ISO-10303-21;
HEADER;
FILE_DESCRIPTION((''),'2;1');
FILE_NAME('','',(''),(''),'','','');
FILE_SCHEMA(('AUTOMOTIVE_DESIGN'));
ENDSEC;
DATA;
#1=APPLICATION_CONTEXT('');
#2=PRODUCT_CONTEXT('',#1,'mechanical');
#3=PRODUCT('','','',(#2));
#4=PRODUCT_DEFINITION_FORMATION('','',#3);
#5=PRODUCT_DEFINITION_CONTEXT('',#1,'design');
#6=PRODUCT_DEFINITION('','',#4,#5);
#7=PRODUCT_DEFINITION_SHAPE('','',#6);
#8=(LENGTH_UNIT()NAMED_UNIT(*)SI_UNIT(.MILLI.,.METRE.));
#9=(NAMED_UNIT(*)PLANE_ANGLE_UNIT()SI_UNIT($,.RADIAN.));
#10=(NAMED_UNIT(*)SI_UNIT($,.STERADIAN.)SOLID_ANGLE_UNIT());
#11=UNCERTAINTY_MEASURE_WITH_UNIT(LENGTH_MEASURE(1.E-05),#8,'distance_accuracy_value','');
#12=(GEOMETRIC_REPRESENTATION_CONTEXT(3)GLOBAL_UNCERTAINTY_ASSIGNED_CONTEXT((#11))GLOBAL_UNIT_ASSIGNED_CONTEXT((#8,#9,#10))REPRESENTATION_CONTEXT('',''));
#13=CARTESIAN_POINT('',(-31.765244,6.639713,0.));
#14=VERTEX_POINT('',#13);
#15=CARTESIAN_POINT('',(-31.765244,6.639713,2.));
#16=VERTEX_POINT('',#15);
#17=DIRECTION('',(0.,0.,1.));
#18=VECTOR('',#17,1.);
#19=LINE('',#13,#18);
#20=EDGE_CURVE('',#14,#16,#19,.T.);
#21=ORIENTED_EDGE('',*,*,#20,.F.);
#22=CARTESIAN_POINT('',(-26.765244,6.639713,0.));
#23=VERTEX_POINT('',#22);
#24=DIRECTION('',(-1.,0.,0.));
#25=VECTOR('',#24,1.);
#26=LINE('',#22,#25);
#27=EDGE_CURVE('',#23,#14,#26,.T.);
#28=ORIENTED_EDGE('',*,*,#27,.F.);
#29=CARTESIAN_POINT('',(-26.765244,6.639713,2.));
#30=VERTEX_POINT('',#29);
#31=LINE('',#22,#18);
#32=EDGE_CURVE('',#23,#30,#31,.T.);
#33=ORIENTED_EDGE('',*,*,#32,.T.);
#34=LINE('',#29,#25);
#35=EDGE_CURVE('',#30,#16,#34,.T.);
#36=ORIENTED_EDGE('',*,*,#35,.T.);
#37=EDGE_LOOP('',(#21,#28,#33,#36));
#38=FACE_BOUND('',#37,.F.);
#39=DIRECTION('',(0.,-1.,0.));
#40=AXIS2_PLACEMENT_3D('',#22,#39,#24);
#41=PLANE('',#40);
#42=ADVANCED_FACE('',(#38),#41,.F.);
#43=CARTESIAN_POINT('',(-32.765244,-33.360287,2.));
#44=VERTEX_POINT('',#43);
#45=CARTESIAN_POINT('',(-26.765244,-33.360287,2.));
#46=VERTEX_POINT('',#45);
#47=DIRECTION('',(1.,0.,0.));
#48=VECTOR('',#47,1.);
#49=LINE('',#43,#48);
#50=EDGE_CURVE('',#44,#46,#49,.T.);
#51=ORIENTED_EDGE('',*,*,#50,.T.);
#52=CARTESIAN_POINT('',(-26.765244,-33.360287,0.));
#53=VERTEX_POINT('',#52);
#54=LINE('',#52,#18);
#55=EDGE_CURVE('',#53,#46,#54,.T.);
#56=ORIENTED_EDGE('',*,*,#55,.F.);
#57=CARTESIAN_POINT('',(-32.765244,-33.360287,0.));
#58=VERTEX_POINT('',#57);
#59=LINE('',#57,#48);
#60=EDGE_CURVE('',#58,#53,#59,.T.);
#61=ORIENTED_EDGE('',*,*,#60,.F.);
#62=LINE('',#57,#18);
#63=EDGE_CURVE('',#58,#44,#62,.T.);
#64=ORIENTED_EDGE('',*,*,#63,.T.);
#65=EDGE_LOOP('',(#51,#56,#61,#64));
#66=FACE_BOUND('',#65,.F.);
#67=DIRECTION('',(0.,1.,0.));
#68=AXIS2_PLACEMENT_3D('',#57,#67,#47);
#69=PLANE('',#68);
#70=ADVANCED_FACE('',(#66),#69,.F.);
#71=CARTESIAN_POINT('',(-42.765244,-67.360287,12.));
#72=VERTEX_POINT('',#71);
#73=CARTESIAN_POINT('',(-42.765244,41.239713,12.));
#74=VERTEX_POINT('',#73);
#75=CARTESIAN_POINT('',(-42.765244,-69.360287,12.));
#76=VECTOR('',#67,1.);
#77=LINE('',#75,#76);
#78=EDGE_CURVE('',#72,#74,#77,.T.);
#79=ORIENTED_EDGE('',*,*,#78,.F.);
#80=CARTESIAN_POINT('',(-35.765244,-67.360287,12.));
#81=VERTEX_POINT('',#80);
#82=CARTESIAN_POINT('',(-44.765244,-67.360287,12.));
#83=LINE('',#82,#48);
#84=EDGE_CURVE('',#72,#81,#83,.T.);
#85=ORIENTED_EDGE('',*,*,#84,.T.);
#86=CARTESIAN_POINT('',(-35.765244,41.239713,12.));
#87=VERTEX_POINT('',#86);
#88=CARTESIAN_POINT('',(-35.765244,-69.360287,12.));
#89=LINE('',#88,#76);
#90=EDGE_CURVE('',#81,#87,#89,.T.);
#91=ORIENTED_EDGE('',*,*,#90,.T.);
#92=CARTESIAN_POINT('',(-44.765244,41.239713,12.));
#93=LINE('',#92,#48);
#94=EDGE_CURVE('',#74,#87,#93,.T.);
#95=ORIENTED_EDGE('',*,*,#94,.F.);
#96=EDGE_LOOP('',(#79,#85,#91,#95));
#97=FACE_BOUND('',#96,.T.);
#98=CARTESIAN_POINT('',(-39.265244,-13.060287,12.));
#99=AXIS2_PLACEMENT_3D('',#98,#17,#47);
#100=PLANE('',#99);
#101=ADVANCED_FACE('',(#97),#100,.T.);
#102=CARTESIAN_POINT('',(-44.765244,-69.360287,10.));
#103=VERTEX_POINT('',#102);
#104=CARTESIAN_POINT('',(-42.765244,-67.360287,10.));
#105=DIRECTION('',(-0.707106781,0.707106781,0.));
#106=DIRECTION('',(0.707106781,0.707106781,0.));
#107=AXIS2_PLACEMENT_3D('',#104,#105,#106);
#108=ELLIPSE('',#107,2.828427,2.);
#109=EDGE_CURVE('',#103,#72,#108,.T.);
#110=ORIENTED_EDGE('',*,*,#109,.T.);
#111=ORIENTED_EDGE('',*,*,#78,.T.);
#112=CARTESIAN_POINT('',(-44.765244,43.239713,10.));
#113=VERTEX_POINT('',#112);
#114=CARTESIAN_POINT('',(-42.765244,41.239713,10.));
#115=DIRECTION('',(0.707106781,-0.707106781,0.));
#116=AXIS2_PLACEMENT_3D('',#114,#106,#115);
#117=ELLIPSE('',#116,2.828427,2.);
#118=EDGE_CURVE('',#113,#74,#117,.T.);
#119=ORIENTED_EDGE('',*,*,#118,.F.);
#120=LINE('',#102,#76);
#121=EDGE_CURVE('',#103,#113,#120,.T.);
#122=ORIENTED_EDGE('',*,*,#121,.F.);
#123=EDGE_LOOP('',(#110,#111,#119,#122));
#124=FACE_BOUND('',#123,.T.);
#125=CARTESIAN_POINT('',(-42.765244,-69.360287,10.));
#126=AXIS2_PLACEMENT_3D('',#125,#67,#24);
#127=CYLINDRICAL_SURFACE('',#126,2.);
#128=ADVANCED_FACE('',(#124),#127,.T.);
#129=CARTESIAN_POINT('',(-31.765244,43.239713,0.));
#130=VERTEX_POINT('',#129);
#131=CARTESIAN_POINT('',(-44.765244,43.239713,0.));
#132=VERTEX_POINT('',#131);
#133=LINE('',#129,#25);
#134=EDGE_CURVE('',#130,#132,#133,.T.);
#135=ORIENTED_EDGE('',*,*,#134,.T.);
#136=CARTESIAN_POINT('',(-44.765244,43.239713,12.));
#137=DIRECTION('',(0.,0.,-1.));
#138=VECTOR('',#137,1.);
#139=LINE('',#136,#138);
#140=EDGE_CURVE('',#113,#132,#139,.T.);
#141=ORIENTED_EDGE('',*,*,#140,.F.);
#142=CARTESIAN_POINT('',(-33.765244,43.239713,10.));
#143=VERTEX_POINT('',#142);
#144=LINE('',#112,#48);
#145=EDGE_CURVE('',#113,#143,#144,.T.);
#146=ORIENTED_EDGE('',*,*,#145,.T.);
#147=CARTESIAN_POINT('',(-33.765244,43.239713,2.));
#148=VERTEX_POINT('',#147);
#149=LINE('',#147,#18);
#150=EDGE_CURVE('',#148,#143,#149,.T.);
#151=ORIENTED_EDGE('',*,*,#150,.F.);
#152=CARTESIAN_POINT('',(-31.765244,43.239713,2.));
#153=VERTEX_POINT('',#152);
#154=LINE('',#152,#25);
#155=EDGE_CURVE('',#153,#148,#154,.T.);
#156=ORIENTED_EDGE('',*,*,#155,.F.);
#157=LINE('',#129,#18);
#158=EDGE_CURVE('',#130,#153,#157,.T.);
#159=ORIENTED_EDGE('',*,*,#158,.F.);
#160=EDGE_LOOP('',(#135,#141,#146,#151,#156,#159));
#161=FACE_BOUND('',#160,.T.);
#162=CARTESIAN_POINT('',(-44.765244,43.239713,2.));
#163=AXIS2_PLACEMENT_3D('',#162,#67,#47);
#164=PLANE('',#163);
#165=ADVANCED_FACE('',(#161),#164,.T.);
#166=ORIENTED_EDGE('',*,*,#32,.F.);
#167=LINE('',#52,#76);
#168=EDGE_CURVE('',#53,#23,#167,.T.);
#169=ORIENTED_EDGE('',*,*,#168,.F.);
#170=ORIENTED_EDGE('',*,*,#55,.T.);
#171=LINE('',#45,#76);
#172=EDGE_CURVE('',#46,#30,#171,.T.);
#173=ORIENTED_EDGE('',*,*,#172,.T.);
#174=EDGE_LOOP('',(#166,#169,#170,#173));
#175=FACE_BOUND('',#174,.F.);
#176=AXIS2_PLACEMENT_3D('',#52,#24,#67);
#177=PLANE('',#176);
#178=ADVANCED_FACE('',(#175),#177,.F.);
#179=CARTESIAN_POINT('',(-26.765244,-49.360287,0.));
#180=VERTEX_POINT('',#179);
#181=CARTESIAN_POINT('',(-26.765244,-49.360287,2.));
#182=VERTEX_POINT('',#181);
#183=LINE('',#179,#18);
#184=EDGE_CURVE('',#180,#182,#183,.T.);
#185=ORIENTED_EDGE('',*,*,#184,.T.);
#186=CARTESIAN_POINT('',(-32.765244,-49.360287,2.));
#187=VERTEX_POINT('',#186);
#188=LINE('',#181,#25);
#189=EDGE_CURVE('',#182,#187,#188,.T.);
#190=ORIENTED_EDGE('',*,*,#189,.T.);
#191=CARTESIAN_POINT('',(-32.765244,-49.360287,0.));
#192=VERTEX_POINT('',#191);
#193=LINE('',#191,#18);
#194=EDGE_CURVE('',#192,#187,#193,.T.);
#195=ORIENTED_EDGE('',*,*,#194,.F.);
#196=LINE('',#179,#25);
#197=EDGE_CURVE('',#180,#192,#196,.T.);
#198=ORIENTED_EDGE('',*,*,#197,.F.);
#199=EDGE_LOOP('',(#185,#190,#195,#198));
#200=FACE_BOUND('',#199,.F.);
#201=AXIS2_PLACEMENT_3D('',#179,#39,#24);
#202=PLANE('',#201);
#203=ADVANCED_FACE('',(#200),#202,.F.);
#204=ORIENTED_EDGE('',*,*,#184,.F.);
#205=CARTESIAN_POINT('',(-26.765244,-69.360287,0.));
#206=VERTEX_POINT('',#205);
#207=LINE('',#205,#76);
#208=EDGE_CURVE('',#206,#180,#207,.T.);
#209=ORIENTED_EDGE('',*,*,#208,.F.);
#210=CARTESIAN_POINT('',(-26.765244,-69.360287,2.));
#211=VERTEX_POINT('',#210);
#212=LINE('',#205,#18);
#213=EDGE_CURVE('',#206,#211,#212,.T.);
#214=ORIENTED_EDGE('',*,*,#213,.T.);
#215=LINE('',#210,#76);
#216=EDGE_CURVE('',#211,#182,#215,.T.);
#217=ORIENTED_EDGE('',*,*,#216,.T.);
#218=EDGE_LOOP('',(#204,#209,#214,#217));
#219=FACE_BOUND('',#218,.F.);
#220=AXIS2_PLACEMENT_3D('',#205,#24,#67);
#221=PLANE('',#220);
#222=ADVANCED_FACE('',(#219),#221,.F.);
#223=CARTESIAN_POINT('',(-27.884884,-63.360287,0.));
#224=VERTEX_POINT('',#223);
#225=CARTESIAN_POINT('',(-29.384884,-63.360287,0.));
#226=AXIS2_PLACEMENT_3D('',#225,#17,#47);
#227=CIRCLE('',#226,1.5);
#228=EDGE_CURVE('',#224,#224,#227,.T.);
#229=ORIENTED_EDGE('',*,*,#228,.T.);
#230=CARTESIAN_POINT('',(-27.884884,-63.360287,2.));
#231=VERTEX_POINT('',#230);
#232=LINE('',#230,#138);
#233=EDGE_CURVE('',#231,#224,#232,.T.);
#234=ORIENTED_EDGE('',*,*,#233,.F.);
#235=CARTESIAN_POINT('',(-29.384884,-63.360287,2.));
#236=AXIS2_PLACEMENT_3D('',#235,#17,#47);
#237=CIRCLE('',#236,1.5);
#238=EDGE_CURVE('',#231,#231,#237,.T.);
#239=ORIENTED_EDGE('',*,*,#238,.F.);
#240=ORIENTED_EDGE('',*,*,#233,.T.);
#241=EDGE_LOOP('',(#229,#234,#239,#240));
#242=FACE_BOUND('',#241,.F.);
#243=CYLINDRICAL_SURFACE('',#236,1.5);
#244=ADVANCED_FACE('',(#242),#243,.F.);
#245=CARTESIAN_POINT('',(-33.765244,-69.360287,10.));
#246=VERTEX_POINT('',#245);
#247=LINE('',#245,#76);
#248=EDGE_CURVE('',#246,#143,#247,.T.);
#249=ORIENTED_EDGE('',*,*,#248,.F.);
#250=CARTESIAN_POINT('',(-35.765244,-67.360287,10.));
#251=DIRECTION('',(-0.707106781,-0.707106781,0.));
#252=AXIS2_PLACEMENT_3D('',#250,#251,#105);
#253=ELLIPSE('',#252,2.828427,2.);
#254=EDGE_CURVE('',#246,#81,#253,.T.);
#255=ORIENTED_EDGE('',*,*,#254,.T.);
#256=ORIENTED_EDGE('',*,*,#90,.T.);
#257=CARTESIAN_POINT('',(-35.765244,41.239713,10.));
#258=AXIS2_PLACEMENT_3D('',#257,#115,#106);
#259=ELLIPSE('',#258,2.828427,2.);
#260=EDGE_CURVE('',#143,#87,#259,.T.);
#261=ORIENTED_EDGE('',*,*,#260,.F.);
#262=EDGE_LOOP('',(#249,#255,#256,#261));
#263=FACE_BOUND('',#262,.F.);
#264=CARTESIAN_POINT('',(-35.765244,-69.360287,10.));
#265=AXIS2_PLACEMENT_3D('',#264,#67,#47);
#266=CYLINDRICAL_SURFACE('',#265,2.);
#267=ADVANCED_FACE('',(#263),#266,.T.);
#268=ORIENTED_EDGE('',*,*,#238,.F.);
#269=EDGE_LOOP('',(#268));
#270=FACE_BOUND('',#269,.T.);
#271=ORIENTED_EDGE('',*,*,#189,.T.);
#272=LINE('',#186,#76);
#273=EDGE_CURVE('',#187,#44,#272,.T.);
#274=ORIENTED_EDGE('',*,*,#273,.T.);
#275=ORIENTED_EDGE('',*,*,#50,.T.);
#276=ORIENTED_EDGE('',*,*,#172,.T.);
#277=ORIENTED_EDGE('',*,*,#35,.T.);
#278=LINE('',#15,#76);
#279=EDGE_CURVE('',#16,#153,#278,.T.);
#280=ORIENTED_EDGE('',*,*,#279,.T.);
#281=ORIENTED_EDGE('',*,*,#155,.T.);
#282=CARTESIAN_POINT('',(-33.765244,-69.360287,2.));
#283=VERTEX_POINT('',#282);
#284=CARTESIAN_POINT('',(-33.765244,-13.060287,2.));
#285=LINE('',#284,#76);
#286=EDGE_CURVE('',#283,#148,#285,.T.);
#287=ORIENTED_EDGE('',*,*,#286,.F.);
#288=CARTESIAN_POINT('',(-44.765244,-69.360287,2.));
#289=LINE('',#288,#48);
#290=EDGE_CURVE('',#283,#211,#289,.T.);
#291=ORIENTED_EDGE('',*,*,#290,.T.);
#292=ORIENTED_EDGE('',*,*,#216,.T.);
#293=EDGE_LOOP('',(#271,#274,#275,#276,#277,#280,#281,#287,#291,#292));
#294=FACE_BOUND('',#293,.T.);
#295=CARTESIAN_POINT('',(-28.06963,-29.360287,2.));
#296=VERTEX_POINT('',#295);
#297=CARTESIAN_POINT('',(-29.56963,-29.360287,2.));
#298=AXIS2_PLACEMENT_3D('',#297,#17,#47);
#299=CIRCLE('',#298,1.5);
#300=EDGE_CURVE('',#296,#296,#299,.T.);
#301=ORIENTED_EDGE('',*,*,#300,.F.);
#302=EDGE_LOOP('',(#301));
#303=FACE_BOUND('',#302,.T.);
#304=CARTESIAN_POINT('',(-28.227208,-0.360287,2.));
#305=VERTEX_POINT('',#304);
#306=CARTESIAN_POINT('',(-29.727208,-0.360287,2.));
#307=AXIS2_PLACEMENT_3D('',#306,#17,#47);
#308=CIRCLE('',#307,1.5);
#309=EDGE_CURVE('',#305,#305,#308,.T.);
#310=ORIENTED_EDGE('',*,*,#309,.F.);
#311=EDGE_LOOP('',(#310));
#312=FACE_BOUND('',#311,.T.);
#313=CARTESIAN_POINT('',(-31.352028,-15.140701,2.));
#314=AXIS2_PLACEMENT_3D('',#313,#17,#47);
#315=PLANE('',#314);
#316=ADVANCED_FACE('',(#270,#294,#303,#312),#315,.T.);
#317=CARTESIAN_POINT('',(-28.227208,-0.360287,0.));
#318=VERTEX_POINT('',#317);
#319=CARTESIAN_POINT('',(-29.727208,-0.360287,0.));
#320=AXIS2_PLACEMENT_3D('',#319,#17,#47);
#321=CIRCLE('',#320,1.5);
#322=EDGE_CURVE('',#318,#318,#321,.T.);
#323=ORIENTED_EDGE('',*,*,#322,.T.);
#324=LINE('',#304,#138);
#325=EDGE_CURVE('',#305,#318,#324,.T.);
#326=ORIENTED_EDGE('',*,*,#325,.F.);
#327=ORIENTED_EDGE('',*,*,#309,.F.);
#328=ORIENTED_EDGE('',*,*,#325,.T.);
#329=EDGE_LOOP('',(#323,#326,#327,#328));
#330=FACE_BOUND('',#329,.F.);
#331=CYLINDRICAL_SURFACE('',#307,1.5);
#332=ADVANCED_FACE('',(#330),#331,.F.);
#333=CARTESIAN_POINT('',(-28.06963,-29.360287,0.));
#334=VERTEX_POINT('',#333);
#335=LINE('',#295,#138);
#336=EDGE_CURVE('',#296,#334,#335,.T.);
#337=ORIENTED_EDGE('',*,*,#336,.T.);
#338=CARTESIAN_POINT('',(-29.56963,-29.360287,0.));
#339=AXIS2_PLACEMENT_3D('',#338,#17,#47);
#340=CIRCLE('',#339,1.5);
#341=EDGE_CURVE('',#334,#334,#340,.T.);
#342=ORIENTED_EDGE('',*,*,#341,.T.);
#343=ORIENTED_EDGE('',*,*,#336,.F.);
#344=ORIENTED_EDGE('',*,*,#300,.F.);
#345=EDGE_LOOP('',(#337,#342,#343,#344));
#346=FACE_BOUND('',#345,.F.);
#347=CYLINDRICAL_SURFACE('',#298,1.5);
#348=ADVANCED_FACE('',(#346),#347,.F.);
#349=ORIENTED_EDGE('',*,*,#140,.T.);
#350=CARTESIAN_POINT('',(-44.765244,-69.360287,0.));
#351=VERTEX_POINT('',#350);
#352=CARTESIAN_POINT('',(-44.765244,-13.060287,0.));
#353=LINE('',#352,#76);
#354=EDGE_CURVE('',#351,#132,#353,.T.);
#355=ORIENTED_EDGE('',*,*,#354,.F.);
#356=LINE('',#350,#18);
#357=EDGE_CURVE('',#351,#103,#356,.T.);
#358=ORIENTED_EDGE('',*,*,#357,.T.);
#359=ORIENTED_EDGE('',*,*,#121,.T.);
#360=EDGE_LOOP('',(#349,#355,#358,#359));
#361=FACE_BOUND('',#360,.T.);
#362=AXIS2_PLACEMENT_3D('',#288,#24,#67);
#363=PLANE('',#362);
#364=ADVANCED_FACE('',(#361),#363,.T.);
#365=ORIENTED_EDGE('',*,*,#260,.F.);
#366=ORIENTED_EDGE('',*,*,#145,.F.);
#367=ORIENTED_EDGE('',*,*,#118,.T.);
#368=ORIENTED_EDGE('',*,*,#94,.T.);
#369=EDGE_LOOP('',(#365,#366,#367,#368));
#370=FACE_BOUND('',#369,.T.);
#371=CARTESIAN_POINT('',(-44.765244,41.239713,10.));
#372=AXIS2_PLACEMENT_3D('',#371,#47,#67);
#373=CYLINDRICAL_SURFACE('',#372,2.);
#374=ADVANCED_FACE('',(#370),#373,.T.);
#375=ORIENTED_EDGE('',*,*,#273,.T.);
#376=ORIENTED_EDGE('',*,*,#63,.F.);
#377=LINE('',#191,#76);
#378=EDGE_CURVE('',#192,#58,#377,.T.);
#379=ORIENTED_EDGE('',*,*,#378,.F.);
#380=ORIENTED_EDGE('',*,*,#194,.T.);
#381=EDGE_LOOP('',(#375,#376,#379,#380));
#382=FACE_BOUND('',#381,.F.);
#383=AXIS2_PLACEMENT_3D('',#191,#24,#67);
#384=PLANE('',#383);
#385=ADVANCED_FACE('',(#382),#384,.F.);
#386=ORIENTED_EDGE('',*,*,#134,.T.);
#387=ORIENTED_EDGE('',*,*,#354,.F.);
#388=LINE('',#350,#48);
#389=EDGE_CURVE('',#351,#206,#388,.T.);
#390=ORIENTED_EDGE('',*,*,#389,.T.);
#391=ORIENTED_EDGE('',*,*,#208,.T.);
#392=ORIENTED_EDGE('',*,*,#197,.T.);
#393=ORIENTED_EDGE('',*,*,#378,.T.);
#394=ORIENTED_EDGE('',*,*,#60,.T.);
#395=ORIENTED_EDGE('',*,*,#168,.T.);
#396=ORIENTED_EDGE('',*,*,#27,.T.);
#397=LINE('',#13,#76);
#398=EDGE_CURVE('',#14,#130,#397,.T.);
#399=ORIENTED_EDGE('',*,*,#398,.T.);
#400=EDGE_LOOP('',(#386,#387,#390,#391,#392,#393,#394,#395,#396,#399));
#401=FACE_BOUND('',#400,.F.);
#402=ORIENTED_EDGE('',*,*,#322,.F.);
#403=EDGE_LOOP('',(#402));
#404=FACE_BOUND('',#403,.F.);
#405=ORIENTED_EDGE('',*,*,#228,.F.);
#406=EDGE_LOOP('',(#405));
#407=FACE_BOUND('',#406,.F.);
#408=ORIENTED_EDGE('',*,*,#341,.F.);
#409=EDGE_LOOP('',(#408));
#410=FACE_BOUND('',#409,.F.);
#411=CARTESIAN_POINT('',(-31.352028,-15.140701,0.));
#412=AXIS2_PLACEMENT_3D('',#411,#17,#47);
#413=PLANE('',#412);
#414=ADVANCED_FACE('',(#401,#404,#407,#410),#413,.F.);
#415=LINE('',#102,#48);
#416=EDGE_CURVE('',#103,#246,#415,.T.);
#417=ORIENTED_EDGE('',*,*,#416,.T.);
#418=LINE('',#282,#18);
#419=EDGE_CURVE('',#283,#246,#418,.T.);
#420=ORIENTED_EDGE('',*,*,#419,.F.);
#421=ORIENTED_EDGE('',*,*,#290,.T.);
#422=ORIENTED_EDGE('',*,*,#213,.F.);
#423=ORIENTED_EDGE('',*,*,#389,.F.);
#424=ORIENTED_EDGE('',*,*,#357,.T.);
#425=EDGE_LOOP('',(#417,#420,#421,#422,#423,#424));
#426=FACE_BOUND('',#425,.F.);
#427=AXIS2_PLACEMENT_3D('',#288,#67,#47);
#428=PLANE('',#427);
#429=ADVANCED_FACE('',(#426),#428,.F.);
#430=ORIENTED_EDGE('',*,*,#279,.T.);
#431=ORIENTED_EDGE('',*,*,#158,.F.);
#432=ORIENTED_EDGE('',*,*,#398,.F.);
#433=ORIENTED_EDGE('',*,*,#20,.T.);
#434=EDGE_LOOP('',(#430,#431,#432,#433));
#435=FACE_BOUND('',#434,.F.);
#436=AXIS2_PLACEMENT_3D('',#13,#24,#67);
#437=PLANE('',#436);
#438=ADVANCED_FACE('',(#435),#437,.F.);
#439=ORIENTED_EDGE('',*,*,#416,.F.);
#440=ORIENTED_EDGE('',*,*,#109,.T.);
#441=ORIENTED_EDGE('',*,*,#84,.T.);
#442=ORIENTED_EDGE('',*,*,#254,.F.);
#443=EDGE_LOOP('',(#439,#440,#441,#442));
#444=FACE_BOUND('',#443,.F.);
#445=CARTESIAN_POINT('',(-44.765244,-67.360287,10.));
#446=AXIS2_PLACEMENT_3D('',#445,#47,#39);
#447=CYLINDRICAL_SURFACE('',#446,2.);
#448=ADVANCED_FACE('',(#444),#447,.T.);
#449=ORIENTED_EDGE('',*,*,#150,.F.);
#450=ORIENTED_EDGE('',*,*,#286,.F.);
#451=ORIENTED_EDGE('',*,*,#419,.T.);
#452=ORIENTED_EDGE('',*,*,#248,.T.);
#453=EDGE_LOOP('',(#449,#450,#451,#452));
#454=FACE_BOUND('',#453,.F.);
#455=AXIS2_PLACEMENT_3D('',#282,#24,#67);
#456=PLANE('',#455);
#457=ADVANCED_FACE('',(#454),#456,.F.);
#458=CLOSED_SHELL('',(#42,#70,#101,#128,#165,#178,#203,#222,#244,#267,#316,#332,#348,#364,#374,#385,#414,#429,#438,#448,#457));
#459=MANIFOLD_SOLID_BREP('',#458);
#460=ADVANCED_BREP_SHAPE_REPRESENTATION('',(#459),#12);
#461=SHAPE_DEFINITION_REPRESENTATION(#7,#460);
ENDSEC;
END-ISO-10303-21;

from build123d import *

# Parameters (mm, degrees)
F0_W     = 11
F0_H     = 112.6
F1_DEPTH = 2
F3_W     = 11
F3_H     = 112.6
F4_DEPTH = 10
F5_R     = 2
F6_R     = 1.5
F7_DEPTH = 25


with BuildPart() as f1:
    # F0 (on Top) → F1 (new body)
    with BuildSketch(Plane.XY):
        Polygon((-31.7652441872, 6.6397131595), (-31.7652441872, 43.2397131595), (-33.7652441872, 43.2397131595), (-33.7652441872, -69.3602868405), (-26.7652441872, -69.3602868405), (-26.7652441872, -49.3602868405), (-32.7652441872, -49.3602868405), (-32.7652441872, -33.3602868405), (-26.7652441872, -33.3602868405), (-26.7652441872, 6.6397131595), align=None)
        with Locations((-39.2652441872, -13.0602868405)):
            Rectangle(F0_W, F0_H)
    extrude(amount=F1_DEPTH)

    # F3 (on offset) → F4 (join)
    with BuildSketch(Plane.XY.offset(2)):
        with Locations((-39.2652441872, -13.0602868405)):
            Rectangle(F3_W, F3_H)
    extrude(amount=F4_DEPTH)

    # F5
    f5_edges = [f1.edges().sort_by_distance(p)[0] for p in [
        (-39.265244, 43.239713, 12),
        (-44.765244, -13.060287, 12),
        (-33.765244, -13.060287, 12),
        (-39.265244, -69.360287, 12),
    ]]
    fillet(f5_edges, radius=F5_R)

    # F6 (on face) → F7 (cut)
    with BuildSketch(Plane.XY.offset(2)):
        with Locations((-29.7272081302, -0.3602868405)):
            Circle(F6_R)
        with Locations((-29.5696301797, -29.3602868405)):
            Circle(F6_R)
        with Locations((-29.3848836171, -63.3602868405)):
            Circle(F6_R)
    extrude(amount=-F7_DEPTH, mode=Mode.SUBTRACT)


solid = f1.part
